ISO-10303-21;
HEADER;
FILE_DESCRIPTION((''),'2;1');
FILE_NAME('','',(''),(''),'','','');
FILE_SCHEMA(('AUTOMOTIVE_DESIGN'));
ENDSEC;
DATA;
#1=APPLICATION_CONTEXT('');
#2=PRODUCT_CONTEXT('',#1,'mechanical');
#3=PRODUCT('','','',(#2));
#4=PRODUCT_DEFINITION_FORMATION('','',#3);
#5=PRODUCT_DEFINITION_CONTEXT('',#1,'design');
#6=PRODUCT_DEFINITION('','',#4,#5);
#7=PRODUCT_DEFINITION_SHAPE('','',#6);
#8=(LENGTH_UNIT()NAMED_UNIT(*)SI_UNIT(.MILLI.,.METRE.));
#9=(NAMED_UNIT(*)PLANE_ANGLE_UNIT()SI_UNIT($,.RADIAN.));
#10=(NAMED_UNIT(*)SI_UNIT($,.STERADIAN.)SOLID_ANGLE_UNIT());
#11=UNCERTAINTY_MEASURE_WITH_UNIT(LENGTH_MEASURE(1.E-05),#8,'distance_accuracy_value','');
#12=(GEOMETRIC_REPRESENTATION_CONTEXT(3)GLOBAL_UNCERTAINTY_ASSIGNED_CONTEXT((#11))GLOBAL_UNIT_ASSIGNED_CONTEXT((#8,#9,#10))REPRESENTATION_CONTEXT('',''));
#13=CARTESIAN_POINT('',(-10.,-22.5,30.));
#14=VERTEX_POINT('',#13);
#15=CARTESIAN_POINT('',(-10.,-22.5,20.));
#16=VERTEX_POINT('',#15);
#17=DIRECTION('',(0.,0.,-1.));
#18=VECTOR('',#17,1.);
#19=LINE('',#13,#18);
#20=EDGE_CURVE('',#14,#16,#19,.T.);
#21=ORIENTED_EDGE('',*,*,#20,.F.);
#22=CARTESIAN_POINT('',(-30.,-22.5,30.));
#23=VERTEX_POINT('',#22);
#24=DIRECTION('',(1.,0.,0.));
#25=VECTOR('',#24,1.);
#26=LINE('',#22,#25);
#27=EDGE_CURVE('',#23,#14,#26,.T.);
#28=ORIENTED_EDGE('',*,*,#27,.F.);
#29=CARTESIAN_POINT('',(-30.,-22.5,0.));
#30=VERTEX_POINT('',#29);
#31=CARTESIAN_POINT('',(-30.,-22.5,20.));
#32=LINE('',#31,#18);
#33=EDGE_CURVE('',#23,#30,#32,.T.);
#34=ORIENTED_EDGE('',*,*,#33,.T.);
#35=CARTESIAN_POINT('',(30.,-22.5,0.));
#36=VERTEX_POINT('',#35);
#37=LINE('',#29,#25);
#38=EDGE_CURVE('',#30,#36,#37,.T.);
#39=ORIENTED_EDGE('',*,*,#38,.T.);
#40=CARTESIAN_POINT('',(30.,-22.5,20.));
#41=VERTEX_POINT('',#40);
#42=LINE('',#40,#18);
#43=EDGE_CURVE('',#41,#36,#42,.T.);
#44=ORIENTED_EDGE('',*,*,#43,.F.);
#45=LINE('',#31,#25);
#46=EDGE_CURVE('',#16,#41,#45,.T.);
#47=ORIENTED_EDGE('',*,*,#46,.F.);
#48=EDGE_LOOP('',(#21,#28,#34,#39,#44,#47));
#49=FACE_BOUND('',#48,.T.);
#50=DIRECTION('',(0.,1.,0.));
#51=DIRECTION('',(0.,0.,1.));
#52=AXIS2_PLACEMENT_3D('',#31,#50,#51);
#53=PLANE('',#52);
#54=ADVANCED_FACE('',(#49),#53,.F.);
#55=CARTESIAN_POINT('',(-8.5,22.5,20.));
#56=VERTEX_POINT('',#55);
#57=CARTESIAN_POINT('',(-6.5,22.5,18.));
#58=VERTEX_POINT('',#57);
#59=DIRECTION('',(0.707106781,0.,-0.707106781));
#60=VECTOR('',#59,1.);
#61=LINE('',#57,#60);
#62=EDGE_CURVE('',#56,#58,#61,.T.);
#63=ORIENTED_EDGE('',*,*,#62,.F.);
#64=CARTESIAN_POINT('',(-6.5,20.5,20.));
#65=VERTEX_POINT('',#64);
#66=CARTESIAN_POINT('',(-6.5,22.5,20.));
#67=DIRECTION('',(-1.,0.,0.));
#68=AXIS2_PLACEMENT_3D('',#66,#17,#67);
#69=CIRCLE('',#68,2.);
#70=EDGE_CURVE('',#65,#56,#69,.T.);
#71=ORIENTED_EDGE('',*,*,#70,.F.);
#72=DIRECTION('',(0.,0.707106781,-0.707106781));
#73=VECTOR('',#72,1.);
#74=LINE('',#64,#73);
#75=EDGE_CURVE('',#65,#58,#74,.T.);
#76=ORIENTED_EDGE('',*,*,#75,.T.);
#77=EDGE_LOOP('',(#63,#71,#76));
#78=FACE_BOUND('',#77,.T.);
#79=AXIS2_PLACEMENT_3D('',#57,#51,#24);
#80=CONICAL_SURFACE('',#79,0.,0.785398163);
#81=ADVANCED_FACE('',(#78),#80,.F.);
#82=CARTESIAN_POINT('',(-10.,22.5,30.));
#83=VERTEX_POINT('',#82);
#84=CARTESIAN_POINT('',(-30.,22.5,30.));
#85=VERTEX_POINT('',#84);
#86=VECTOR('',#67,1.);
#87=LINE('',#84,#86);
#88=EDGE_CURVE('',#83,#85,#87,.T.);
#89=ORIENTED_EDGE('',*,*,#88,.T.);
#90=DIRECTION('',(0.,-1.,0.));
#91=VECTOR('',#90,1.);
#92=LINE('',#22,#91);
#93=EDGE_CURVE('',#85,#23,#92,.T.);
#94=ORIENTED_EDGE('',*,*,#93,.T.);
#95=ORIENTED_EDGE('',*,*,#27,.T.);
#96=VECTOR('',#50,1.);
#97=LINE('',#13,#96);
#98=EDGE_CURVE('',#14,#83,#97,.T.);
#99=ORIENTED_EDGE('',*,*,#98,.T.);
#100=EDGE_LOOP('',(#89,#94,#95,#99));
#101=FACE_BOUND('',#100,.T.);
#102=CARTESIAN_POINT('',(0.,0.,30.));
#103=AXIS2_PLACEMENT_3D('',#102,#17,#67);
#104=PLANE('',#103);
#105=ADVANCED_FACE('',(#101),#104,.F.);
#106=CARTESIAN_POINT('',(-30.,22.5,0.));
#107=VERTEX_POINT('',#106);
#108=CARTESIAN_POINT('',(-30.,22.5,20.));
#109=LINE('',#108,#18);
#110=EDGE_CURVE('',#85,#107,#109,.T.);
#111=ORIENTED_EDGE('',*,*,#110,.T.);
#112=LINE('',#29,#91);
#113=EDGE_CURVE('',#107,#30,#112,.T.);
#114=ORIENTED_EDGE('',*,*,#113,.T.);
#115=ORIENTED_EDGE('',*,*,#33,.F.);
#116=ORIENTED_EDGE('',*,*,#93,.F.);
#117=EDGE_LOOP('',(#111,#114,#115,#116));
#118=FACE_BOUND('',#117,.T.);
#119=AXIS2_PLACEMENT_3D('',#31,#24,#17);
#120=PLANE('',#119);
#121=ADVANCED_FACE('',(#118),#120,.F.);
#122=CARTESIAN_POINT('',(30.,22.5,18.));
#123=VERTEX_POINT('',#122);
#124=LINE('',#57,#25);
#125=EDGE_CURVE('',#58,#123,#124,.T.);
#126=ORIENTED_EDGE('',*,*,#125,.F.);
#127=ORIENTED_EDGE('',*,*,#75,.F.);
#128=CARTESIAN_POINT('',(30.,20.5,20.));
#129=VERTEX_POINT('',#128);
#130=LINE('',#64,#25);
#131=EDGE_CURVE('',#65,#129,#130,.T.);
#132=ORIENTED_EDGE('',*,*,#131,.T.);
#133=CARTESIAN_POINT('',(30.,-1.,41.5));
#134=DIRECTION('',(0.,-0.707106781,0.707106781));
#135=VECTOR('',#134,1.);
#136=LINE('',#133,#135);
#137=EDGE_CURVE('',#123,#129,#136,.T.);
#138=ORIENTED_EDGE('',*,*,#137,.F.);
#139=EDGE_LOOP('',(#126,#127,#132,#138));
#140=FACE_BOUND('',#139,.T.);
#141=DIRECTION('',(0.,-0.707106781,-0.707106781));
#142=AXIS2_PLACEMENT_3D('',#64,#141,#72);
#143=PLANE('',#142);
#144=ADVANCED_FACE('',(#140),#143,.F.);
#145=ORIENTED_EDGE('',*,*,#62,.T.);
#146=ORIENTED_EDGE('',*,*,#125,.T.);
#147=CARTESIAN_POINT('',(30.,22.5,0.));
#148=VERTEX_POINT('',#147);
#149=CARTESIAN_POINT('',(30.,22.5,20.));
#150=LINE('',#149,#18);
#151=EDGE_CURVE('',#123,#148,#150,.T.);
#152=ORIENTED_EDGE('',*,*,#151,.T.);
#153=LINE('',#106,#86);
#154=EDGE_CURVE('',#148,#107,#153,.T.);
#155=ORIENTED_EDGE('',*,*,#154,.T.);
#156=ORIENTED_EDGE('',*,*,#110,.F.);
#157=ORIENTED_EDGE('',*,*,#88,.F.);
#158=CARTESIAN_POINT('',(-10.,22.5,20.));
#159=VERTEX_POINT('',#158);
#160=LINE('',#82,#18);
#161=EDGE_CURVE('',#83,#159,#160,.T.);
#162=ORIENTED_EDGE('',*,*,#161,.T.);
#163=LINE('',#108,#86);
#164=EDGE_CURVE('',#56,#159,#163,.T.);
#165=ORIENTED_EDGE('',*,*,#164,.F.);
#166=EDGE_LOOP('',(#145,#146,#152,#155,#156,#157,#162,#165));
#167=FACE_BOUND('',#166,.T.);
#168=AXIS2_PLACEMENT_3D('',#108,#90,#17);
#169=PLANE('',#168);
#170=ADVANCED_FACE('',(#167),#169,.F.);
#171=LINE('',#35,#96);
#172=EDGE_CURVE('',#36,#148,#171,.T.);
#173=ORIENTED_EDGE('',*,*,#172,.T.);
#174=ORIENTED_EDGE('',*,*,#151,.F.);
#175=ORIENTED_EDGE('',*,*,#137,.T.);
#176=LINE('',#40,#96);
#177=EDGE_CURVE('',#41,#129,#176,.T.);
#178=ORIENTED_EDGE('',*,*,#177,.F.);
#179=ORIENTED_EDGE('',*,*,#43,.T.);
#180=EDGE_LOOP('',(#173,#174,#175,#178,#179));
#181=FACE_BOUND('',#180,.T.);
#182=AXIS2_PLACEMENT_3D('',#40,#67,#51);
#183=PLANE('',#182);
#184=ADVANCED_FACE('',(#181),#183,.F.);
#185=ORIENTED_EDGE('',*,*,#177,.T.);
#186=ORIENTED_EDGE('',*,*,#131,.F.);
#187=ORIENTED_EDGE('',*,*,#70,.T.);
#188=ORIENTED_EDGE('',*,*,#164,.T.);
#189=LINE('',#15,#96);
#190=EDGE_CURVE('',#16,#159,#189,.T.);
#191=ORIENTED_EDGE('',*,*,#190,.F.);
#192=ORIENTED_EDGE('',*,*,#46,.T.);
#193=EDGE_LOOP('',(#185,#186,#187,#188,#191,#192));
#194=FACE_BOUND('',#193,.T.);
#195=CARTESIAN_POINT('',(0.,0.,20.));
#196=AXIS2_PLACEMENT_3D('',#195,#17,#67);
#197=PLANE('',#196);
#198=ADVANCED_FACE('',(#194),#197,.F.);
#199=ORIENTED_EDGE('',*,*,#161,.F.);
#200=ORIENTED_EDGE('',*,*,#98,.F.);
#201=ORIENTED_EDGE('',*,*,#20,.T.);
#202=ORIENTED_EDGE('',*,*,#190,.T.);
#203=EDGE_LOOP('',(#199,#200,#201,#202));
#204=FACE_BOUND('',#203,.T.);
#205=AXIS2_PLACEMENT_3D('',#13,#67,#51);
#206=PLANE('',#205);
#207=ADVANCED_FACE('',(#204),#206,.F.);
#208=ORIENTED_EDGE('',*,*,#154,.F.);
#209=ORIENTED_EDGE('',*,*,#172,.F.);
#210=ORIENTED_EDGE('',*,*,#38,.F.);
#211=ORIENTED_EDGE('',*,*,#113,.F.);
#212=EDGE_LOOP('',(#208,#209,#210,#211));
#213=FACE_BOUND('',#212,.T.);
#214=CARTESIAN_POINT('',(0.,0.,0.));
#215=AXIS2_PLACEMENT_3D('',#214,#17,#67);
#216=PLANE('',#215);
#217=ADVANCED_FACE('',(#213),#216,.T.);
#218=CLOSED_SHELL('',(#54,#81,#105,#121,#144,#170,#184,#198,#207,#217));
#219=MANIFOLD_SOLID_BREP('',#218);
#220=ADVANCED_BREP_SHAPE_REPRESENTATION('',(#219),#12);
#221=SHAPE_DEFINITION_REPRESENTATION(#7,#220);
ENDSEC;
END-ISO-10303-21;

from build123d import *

# Parameters (mm, degrees)
SKETCH1_W               = 60
SKETCH1_H               = 45
BOSS_EXTRUDE1_DEPTH     = 20
SKETCH2_W               = 20
SKETCH2_H               = 45
BOSS_EXTRUDE2_DEPTH     = 10
MFGCHAMFER1_START       = 28.637824638
MFGCHAMFER1_2_OUTLINE_W = 36.5
MFGCHAMFER1_2_OUTLINE_H = 2.828427124
MFGCHAMFER1_2_DEPTH     = 2.362175362


with BuildPart() as part:
    # Sketch1 → Boss-Extrude1 (new body)
    with BuildSketch(Plane.XY):
        Rectangle(SKETCH1_W, SKETCH1_H)
    extrude(amount=BOSS_EXTRUDE1_DEPTH)

    # Sketch2 → Boss-Extrude2 (add)
    with BuildSketch(Plane.XY.offset(20)):
        with Locations((-20, 0)):
            Rectangle(SKETCH2_W, SKETCH2_H)
    extrude(amount=BOSS_EXTRUDE2_DEPTH)

    # MfgChamfer1: read off the stored shape, not the designer's step
    # MfgChamfer1 outline → MfgChamfer1 (revolve, cut)
    with BuildSketch(Plane(origin=(-6.5, 22.5, 0), x_dir=(1, 0, 0), z_dir=(0, -1, 0))):
        Polygon((0, 20), (0, 18), (2, 20), align=None)
    revolve(axis=Axis((-6.5, 22.5, 0), (0, 0, 1)), mode=Mode.SUBTRACT)

    # MfgChamfer1 2 outline → MfgChamfer1 2 (cut)
    with BuildSketch(Plane(origin=(0, 0, 0), x_dir=(1, 0, 0), z_dir=(0, 0.707106781186547, 0.707106781186548)).offset(MFGCHAMFER1_START)):
        with Locations((11.75, 1.767766953)):
            Rectangle(MFGCHAMFER1_2_OUTLINE_W, MFGCHAMFER1_2_OUTLINE_H)
    extrude(amount=MFGCHAMFER1_2_DEPTH, mode=Mode.SUBTRACT)


solid = part.part
